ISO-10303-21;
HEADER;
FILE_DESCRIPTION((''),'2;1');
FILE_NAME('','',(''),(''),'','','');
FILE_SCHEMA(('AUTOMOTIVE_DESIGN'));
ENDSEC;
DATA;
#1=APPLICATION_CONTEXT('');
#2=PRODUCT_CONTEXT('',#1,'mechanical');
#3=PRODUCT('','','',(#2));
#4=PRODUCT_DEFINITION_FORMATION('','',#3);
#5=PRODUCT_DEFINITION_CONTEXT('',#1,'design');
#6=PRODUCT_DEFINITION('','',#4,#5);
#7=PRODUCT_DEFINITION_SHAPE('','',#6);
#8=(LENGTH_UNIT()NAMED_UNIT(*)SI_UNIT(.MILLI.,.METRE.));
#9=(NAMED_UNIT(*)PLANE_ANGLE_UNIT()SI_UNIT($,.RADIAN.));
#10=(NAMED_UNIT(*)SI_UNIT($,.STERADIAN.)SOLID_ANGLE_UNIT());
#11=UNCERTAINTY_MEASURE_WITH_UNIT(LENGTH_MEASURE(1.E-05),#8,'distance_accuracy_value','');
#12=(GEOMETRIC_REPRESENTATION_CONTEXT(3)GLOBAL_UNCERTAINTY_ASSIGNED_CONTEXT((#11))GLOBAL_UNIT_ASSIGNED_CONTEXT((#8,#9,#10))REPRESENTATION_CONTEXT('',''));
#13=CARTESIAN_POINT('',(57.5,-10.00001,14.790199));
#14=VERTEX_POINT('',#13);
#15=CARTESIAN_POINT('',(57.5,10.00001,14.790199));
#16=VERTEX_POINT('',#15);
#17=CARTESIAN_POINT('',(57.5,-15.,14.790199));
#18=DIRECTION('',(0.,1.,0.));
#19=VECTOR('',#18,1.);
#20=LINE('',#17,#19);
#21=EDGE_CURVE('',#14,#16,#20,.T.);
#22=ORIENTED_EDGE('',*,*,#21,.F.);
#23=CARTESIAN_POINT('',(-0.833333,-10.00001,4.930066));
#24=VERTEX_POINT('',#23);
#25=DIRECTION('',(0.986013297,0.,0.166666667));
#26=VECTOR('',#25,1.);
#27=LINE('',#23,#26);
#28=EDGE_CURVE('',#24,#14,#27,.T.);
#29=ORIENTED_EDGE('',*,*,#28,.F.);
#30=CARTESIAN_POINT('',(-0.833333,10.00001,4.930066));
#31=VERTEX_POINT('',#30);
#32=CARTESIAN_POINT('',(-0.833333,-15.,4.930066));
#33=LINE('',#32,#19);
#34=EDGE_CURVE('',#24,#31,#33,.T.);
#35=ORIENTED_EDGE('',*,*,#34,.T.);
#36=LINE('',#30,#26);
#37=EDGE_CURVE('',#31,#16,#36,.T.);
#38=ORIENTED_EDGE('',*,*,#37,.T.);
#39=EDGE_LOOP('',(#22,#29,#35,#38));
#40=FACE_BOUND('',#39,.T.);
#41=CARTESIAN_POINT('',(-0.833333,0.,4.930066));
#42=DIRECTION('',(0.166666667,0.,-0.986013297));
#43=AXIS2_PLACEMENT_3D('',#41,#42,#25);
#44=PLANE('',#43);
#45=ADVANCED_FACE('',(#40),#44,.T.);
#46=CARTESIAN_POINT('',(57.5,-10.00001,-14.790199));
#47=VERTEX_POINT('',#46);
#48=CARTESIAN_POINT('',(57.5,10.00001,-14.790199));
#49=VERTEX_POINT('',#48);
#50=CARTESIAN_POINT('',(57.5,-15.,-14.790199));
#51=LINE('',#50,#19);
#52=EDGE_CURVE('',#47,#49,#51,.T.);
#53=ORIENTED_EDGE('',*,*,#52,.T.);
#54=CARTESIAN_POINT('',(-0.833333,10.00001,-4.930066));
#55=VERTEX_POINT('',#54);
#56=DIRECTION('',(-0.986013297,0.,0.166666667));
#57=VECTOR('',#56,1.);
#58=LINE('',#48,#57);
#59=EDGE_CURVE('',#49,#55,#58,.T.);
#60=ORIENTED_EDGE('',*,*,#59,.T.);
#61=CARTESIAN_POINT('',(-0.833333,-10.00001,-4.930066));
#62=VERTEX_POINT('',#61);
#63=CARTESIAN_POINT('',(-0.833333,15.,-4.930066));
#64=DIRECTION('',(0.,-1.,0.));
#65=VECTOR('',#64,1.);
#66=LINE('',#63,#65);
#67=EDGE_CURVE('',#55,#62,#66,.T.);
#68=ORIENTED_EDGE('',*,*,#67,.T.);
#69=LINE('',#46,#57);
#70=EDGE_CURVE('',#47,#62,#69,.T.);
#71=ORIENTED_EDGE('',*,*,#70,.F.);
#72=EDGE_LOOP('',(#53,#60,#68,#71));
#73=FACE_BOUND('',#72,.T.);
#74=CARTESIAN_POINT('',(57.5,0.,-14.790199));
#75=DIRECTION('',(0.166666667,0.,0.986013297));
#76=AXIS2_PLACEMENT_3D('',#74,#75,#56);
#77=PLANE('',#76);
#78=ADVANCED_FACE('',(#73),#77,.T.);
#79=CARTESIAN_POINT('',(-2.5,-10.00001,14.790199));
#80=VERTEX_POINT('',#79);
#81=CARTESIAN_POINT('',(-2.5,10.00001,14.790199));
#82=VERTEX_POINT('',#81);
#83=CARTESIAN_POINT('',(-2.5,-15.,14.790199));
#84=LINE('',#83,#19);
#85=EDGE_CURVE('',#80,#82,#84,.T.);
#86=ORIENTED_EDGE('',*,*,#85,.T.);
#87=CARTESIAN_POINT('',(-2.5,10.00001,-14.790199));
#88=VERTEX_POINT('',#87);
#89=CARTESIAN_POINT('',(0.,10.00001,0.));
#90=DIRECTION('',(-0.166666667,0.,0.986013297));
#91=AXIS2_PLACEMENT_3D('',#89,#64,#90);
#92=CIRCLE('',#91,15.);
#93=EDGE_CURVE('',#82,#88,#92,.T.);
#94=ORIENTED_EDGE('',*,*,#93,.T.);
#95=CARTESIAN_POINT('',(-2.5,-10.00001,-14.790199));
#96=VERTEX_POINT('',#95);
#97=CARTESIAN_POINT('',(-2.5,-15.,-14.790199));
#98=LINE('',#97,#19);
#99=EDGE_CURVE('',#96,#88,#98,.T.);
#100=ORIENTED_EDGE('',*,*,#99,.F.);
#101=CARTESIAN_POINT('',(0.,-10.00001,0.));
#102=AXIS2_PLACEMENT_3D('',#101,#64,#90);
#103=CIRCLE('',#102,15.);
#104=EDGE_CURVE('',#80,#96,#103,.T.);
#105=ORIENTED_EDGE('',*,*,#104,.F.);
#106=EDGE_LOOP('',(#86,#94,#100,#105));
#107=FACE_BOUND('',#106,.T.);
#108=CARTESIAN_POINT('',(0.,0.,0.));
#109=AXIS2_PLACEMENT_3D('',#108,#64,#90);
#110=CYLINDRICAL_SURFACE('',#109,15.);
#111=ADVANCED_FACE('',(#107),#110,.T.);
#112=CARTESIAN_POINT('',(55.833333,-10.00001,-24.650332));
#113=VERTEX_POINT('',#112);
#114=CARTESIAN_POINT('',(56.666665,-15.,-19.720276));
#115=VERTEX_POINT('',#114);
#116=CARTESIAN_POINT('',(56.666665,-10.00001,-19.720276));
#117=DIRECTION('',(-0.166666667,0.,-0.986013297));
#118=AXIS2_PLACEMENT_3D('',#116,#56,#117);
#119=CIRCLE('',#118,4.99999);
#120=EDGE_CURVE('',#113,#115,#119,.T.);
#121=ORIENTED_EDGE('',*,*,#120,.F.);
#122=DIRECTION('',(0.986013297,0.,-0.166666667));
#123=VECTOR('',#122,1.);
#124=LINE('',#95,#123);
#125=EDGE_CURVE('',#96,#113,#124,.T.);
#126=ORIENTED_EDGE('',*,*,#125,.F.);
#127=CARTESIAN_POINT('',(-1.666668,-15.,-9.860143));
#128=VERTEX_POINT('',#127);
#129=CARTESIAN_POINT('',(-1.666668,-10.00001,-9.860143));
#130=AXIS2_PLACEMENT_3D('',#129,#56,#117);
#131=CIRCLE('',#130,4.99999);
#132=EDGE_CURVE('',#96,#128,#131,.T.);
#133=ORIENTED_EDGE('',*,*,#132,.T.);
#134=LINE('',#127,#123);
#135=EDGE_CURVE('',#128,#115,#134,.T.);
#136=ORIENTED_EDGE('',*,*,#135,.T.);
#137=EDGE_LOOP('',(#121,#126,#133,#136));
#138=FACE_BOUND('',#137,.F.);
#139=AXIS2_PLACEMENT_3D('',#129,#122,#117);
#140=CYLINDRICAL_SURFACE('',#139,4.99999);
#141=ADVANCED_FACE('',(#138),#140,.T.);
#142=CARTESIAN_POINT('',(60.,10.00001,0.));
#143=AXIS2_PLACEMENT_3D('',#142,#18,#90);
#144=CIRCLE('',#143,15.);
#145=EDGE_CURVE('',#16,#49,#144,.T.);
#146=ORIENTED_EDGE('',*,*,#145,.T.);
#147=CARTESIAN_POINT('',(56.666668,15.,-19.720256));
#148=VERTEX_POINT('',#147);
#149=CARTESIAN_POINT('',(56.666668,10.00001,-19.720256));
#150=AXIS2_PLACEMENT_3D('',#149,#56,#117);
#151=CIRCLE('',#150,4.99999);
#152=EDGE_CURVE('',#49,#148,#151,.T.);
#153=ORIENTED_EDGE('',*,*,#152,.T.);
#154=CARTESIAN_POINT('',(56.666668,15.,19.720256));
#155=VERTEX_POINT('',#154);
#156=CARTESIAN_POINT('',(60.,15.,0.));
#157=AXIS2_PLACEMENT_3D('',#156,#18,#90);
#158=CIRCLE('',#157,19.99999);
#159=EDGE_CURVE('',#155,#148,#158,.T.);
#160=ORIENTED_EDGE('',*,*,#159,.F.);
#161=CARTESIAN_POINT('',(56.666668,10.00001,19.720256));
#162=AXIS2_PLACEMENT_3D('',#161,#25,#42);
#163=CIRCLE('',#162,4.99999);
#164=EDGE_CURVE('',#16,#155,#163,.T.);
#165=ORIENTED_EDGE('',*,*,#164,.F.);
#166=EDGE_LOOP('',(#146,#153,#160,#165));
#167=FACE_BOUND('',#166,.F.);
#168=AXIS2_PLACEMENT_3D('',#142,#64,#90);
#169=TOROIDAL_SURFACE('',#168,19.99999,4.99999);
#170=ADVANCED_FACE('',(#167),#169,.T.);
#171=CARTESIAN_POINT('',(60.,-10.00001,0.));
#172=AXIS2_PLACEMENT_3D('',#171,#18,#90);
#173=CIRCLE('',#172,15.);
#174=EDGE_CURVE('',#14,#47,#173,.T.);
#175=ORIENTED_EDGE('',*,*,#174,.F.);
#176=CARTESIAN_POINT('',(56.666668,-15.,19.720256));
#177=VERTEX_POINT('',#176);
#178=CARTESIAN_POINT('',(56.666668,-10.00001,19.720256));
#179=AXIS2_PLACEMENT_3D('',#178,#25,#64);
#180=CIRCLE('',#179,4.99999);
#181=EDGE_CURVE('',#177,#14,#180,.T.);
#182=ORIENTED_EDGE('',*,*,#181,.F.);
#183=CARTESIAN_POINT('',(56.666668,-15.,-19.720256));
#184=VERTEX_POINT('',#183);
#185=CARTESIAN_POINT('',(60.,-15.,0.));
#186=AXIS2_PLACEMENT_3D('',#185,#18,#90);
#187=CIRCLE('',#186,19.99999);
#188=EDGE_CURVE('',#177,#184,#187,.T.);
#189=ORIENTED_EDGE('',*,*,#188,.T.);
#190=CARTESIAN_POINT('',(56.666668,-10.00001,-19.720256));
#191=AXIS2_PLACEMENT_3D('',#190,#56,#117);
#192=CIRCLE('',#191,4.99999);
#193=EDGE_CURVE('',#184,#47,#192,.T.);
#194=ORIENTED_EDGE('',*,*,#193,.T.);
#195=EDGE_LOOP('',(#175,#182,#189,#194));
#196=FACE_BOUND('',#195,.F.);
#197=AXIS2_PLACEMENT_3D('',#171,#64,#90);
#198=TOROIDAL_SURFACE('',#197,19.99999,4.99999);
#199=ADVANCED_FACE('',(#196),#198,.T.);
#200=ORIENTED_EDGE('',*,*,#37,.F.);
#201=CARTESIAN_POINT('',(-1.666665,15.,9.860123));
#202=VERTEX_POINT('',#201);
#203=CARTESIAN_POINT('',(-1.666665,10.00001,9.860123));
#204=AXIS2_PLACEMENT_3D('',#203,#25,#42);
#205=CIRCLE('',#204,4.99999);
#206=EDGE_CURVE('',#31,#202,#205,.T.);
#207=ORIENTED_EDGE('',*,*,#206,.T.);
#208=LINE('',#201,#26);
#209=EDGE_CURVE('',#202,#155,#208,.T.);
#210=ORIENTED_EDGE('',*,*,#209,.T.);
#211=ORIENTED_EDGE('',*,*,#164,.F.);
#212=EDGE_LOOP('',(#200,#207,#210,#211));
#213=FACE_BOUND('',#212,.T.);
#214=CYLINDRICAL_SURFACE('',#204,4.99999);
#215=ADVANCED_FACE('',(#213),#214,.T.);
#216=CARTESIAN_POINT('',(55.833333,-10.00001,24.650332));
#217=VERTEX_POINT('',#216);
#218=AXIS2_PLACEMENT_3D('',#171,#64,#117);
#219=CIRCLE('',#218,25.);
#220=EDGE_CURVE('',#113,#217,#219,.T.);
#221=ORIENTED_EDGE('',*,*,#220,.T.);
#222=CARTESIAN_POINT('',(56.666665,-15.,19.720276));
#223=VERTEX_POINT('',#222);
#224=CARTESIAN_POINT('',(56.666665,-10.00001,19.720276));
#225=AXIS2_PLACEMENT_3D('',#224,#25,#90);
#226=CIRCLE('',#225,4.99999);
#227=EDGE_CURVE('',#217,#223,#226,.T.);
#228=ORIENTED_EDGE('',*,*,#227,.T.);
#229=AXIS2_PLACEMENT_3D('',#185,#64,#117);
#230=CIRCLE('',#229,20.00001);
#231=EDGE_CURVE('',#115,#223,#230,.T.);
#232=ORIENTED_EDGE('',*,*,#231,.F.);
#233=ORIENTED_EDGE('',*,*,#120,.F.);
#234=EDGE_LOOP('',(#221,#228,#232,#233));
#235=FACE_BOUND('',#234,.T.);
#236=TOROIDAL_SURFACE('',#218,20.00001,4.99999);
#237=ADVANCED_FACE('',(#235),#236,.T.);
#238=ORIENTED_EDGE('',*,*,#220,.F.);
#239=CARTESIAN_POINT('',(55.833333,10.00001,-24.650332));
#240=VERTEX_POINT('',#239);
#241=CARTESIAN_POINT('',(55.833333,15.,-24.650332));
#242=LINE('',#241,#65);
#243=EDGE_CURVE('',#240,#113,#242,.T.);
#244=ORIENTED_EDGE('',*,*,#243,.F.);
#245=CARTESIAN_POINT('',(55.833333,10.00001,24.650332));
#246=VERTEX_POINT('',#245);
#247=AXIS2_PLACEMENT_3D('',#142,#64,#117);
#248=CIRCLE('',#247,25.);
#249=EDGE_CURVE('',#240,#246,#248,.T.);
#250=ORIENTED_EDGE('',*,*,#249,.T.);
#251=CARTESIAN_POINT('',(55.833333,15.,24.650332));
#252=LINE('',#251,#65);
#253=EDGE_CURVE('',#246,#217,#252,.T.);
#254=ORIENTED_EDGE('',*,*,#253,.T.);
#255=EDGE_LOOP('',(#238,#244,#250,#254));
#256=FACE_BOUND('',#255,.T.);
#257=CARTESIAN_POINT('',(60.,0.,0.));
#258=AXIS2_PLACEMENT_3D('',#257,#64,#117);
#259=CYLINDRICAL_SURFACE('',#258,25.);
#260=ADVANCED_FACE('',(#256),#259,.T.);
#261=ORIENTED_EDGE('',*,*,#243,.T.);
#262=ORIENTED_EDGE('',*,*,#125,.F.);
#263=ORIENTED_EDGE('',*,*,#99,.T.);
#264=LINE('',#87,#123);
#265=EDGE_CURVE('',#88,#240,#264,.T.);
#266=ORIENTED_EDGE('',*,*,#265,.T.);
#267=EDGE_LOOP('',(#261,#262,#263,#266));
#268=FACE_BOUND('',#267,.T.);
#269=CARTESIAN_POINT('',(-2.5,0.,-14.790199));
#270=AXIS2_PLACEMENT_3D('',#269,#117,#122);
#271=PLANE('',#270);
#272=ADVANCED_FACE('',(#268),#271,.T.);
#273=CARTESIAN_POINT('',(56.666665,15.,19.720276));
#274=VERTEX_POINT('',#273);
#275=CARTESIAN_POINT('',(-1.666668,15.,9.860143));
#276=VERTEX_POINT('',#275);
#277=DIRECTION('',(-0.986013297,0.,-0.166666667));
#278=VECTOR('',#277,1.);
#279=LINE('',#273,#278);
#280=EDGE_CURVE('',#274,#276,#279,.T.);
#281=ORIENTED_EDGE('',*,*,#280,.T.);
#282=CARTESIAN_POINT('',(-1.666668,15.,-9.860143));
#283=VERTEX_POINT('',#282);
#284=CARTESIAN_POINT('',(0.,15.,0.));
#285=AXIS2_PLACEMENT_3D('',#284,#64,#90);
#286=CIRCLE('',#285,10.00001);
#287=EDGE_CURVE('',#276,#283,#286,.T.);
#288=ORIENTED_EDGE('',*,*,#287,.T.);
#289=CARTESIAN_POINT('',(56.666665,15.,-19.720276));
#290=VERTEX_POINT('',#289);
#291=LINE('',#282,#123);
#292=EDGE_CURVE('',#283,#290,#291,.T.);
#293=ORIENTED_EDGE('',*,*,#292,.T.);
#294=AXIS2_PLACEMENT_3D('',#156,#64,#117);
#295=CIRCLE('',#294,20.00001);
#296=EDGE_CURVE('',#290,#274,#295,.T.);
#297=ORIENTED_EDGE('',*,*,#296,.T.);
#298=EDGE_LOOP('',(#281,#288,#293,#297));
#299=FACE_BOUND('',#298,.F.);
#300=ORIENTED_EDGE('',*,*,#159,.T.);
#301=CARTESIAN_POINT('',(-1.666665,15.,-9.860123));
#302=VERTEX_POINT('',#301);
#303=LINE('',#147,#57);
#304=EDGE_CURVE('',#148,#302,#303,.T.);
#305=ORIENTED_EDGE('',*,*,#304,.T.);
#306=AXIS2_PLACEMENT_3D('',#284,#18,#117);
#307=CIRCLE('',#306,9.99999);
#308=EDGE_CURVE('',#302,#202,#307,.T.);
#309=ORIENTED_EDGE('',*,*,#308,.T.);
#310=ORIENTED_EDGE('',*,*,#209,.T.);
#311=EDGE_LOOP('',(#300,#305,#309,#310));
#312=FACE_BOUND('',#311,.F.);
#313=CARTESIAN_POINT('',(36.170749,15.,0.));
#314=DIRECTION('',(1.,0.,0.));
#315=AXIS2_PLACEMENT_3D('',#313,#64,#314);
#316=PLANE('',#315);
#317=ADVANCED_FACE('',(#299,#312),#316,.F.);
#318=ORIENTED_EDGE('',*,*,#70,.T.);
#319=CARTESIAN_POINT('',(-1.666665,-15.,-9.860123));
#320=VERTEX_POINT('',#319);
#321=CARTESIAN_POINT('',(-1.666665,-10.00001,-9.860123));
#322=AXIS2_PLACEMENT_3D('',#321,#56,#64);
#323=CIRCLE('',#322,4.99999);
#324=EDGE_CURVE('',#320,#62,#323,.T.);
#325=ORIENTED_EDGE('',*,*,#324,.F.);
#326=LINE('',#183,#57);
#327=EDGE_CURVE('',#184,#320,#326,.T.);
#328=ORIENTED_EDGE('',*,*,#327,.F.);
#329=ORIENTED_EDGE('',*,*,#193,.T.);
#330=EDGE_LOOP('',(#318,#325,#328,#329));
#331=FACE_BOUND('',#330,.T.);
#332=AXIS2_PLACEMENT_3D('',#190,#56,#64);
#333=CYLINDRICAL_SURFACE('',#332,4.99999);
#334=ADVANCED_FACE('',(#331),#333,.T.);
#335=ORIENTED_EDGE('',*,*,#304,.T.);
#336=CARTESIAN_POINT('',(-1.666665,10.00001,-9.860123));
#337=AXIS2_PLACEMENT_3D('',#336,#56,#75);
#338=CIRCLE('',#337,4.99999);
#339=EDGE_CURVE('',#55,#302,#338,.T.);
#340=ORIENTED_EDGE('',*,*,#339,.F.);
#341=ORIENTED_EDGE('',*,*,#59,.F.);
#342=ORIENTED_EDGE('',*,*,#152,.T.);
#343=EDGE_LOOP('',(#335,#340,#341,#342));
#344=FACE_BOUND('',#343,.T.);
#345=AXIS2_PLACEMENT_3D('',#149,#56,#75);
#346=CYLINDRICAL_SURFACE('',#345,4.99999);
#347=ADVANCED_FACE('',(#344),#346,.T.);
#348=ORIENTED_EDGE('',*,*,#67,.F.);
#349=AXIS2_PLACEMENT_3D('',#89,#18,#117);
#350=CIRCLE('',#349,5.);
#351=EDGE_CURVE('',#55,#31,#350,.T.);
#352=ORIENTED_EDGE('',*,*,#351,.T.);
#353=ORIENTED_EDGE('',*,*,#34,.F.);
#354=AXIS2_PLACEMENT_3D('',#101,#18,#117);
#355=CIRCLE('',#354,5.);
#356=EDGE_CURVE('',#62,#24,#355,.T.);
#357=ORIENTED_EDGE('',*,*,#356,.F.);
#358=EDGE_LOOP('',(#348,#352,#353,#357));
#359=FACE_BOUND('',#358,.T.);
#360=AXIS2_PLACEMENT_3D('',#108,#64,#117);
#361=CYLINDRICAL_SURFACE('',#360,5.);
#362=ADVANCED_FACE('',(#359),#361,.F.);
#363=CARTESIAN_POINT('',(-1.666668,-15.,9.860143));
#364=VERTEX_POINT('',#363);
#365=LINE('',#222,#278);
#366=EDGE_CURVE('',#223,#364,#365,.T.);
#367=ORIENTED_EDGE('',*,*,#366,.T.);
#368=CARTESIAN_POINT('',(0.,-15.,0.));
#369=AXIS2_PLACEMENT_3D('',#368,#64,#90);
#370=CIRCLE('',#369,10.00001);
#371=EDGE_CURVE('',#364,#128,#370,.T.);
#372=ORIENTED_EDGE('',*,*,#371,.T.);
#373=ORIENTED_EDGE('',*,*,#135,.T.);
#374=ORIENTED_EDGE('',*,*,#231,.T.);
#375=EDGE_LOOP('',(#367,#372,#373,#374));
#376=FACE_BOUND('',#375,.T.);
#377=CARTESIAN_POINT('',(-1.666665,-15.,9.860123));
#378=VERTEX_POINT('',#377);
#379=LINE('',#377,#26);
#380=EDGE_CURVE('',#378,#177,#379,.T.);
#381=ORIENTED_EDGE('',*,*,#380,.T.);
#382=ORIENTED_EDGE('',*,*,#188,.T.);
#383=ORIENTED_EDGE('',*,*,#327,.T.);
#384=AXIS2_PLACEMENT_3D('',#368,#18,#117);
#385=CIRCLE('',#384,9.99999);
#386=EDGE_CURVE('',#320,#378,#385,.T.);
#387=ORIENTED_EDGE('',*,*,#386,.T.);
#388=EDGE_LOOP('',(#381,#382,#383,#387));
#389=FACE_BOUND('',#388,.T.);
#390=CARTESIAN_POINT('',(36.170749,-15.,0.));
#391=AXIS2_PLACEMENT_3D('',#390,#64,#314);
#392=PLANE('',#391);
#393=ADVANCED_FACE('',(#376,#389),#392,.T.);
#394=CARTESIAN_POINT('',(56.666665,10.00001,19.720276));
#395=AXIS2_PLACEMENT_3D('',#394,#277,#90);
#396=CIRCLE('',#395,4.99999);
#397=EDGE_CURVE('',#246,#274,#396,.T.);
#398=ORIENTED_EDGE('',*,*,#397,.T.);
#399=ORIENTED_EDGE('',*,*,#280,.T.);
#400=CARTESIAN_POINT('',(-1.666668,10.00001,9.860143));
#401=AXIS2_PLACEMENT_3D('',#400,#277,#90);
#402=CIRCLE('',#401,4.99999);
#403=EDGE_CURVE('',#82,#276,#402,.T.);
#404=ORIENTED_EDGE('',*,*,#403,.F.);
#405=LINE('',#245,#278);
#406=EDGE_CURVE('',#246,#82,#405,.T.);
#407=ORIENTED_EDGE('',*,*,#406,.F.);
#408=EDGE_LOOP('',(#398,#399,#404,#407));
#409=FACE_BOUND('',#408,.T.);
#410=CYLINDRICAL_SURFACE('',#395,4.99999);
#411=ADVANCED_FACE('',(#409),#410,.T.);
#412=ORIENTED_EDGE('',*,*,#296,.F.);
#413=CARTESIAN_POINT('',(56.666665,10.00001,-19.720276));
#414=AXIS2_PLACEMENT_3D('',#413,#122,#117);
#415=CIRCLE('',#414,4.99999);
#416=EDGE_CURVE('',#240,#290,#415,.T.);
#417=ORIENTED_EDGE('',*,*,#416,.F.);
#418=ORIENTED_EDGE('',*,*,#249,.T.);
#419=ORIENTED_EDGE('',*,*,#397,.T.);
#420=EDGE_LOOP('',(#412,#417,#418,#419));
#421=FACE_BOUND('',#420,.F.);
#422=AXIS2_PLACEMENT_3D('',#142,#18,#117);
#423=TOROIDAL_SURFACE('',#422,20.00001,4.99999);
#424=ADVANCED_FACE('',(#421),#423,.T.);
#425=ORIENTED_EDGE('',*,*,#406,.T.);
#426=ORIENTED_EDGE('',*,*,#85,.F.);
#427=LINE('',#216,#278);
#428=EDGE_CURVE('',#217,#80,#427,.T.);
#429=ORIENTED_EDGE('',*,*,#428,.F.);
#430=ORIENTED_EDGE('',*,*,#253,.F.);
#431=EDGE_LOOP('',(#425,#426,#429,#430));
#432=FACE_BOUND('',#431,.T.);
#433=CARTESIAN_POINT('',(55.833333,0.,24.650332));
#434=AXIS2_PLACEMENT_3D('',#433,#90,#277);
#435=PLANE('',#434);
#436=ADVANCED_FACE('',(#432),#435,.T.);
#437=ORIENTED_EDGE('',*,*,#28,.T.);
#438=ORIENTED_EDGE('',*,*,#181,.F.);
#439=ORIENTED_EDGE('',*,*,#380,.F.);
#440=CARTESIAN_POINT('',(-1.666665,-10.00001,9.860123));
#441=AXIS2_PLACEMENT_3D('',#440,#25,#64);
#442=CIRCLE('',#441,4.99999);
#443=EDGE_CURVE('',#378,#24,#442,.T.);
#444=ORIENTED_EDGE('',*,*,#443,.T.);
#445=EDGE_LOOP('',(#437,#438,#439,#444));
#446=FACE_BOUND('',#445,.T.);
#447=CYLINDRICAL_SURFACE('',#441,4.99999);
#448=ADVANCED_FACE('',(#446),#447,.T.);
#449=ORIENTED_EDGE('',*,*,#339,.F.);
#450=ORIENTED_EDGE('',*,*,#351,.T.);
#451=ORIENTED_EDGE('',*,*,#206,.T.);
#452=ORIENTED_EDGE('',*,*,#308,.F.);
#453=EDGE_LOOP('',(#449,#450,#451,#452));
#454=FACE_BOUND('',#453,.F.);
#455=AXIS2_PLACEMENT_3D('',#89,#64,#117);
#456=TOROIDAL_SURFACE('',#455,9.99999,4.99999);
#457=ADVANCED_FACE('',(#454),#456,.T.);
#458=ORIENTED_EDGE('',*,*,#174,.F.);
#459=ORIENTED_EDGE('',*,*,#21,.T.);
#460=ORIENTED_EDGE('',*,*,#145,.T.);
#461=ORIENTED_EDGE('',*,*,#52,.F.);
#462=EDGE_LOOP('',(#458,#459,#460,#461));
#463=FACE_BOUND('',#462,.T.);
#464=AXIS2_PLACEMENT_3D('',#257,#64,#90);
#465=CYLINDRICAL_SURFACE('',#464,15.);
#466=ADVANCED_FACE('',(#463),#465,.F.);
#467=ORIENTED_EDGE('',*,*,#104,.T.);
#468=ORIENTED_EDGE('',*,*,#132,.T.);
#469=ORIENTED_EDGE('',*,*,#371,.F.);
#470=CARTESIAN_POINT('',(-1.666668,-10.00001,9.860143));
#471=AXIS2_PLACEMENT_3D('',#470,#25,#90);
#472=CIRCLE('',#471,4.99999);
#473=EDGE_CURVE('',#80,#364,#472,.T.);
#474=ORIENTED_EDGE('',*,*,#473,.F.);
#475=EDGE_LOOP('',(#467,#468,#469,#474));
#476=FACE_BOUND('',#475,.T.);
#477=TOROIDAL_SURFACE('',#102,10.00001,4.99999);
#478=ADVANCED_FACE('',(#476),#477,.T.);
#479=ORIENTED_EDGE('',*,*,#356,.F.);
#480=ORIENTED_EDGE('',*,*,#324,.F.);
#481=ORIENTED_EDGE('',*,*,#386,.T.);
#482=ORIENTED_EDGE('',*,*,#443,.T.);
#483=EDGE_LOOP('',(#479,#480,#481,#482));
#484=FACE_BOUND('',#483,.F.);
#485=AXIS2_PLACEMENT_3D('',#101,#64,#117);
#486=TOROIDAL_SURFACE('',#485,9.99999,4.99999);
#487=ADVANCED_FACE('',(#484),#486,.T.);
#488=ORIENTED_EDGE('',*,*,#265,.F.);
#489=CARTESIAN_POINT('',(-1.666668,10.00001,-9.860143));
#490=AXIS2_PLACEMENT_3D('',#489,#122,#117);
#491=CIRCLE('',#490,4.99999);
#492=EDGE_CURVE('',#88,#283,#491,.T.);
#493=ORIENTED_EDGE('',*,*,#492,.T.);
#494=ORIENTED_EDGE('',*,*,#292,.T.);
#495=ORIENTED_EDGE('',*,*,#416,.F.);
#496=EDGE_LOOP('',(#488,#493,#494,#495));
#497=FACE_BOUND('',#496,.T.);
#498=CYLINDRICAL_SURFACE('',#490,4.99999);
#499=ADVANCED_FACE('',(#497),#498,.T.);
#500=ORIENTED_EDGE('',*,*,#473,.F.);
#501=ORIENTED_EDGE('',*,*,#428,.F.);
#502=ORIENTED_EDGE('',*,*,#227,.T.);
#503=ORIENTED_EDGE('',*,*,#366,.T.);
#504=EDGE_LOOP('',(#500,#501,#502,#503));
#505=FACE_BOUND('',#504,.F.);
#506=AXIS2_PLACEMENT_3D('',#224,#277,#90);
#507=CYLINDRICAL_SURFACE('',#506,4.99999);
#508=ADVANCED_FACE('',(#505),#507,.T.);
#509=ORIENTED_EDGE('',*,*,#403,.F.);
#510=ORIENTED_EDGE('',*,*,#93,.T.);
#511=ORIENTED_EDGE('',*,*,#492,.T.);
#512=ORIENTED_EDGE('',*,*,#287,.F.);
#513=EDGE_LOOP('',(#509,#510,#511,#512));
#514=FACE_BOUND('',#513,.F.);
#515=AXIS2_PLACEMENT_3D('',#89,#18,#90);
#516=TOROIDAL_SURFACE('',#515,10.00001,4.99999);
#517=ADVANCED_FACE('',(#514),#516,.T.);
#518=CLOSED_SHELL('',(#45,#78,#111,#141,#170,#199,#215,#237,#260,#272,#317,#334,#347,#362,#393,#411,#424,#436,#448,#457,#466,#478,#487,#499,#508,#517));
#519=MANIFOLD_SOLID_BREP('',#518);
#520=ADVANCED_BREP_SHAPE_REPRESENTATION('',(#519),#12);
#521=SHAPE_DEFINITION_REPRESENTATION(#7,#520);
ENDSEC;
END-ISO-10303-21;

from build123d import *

# Parameters (mm, degrees)
F1_DEPTH      = 15
F1_DEPTH_BACK = 15
F2_R          = 4.99999


# Not quite as in the source:
# - a fillet or chamfer is up to 0.001 mm smaller than in the source, because OpenCascade refuses the exact size


with BuildPart() as f1:
    # F0 (on Front) → F1 (new body, two sides)
    with BuildSketch(Plane.XZ) as f1_sk:
        with BuildLine():
            Line((-2.5, -14.7901994577), (55.8333333333, -24.6503324296))
            ThreePointArc((55.8333333333, -24.6503324296), (85, 0), (55.8333333333, 24.6503324296))
            Line((55.8333333333, 24.6503324296), (-2.5, 14.7901994577))
            ThreePointArc((-2.5, 14.7901994577), (-15, 0), (-2.5, -14.7901994577))
        make_face()
        with BuildLine():
            ThreePointArc((-0.8333333333, -4.9300664859), (-5, 0), (-0.8333333333, 4.9300664859))
            Line((-0.8333333333, 4.9300664859), (57.5, 14.7901994577))
            ThreePointArc((57.5, 14.7901994577), (75, 0), (57.5, -14.7901994577))
            Line((57.5, -14.7901994577), (-0.8333333333, -4.9300664859))
        make_face(mode=Mode.SUBTRACT)
    extrude(amount=F1_DEPTH)
    extrude(f1_sk.sketch, amount=-F1_DEPTH_BACK)

    # F2 (radius 5 in the source; OpenCascade refuses exactly that, so slightly less here)
    f2_edges = [f1.edges().sort_by_distance(p)[0] for p in [
        (28.333333, -15, 9.860133),
        (26.666667, -15, 19.720266),
        (26.666667, 15, 19.720266),
        (28.333333, 15, 9.860133),
    ]]
    fillet(f2_edges, radius=F2_R)


solid = f1.part
